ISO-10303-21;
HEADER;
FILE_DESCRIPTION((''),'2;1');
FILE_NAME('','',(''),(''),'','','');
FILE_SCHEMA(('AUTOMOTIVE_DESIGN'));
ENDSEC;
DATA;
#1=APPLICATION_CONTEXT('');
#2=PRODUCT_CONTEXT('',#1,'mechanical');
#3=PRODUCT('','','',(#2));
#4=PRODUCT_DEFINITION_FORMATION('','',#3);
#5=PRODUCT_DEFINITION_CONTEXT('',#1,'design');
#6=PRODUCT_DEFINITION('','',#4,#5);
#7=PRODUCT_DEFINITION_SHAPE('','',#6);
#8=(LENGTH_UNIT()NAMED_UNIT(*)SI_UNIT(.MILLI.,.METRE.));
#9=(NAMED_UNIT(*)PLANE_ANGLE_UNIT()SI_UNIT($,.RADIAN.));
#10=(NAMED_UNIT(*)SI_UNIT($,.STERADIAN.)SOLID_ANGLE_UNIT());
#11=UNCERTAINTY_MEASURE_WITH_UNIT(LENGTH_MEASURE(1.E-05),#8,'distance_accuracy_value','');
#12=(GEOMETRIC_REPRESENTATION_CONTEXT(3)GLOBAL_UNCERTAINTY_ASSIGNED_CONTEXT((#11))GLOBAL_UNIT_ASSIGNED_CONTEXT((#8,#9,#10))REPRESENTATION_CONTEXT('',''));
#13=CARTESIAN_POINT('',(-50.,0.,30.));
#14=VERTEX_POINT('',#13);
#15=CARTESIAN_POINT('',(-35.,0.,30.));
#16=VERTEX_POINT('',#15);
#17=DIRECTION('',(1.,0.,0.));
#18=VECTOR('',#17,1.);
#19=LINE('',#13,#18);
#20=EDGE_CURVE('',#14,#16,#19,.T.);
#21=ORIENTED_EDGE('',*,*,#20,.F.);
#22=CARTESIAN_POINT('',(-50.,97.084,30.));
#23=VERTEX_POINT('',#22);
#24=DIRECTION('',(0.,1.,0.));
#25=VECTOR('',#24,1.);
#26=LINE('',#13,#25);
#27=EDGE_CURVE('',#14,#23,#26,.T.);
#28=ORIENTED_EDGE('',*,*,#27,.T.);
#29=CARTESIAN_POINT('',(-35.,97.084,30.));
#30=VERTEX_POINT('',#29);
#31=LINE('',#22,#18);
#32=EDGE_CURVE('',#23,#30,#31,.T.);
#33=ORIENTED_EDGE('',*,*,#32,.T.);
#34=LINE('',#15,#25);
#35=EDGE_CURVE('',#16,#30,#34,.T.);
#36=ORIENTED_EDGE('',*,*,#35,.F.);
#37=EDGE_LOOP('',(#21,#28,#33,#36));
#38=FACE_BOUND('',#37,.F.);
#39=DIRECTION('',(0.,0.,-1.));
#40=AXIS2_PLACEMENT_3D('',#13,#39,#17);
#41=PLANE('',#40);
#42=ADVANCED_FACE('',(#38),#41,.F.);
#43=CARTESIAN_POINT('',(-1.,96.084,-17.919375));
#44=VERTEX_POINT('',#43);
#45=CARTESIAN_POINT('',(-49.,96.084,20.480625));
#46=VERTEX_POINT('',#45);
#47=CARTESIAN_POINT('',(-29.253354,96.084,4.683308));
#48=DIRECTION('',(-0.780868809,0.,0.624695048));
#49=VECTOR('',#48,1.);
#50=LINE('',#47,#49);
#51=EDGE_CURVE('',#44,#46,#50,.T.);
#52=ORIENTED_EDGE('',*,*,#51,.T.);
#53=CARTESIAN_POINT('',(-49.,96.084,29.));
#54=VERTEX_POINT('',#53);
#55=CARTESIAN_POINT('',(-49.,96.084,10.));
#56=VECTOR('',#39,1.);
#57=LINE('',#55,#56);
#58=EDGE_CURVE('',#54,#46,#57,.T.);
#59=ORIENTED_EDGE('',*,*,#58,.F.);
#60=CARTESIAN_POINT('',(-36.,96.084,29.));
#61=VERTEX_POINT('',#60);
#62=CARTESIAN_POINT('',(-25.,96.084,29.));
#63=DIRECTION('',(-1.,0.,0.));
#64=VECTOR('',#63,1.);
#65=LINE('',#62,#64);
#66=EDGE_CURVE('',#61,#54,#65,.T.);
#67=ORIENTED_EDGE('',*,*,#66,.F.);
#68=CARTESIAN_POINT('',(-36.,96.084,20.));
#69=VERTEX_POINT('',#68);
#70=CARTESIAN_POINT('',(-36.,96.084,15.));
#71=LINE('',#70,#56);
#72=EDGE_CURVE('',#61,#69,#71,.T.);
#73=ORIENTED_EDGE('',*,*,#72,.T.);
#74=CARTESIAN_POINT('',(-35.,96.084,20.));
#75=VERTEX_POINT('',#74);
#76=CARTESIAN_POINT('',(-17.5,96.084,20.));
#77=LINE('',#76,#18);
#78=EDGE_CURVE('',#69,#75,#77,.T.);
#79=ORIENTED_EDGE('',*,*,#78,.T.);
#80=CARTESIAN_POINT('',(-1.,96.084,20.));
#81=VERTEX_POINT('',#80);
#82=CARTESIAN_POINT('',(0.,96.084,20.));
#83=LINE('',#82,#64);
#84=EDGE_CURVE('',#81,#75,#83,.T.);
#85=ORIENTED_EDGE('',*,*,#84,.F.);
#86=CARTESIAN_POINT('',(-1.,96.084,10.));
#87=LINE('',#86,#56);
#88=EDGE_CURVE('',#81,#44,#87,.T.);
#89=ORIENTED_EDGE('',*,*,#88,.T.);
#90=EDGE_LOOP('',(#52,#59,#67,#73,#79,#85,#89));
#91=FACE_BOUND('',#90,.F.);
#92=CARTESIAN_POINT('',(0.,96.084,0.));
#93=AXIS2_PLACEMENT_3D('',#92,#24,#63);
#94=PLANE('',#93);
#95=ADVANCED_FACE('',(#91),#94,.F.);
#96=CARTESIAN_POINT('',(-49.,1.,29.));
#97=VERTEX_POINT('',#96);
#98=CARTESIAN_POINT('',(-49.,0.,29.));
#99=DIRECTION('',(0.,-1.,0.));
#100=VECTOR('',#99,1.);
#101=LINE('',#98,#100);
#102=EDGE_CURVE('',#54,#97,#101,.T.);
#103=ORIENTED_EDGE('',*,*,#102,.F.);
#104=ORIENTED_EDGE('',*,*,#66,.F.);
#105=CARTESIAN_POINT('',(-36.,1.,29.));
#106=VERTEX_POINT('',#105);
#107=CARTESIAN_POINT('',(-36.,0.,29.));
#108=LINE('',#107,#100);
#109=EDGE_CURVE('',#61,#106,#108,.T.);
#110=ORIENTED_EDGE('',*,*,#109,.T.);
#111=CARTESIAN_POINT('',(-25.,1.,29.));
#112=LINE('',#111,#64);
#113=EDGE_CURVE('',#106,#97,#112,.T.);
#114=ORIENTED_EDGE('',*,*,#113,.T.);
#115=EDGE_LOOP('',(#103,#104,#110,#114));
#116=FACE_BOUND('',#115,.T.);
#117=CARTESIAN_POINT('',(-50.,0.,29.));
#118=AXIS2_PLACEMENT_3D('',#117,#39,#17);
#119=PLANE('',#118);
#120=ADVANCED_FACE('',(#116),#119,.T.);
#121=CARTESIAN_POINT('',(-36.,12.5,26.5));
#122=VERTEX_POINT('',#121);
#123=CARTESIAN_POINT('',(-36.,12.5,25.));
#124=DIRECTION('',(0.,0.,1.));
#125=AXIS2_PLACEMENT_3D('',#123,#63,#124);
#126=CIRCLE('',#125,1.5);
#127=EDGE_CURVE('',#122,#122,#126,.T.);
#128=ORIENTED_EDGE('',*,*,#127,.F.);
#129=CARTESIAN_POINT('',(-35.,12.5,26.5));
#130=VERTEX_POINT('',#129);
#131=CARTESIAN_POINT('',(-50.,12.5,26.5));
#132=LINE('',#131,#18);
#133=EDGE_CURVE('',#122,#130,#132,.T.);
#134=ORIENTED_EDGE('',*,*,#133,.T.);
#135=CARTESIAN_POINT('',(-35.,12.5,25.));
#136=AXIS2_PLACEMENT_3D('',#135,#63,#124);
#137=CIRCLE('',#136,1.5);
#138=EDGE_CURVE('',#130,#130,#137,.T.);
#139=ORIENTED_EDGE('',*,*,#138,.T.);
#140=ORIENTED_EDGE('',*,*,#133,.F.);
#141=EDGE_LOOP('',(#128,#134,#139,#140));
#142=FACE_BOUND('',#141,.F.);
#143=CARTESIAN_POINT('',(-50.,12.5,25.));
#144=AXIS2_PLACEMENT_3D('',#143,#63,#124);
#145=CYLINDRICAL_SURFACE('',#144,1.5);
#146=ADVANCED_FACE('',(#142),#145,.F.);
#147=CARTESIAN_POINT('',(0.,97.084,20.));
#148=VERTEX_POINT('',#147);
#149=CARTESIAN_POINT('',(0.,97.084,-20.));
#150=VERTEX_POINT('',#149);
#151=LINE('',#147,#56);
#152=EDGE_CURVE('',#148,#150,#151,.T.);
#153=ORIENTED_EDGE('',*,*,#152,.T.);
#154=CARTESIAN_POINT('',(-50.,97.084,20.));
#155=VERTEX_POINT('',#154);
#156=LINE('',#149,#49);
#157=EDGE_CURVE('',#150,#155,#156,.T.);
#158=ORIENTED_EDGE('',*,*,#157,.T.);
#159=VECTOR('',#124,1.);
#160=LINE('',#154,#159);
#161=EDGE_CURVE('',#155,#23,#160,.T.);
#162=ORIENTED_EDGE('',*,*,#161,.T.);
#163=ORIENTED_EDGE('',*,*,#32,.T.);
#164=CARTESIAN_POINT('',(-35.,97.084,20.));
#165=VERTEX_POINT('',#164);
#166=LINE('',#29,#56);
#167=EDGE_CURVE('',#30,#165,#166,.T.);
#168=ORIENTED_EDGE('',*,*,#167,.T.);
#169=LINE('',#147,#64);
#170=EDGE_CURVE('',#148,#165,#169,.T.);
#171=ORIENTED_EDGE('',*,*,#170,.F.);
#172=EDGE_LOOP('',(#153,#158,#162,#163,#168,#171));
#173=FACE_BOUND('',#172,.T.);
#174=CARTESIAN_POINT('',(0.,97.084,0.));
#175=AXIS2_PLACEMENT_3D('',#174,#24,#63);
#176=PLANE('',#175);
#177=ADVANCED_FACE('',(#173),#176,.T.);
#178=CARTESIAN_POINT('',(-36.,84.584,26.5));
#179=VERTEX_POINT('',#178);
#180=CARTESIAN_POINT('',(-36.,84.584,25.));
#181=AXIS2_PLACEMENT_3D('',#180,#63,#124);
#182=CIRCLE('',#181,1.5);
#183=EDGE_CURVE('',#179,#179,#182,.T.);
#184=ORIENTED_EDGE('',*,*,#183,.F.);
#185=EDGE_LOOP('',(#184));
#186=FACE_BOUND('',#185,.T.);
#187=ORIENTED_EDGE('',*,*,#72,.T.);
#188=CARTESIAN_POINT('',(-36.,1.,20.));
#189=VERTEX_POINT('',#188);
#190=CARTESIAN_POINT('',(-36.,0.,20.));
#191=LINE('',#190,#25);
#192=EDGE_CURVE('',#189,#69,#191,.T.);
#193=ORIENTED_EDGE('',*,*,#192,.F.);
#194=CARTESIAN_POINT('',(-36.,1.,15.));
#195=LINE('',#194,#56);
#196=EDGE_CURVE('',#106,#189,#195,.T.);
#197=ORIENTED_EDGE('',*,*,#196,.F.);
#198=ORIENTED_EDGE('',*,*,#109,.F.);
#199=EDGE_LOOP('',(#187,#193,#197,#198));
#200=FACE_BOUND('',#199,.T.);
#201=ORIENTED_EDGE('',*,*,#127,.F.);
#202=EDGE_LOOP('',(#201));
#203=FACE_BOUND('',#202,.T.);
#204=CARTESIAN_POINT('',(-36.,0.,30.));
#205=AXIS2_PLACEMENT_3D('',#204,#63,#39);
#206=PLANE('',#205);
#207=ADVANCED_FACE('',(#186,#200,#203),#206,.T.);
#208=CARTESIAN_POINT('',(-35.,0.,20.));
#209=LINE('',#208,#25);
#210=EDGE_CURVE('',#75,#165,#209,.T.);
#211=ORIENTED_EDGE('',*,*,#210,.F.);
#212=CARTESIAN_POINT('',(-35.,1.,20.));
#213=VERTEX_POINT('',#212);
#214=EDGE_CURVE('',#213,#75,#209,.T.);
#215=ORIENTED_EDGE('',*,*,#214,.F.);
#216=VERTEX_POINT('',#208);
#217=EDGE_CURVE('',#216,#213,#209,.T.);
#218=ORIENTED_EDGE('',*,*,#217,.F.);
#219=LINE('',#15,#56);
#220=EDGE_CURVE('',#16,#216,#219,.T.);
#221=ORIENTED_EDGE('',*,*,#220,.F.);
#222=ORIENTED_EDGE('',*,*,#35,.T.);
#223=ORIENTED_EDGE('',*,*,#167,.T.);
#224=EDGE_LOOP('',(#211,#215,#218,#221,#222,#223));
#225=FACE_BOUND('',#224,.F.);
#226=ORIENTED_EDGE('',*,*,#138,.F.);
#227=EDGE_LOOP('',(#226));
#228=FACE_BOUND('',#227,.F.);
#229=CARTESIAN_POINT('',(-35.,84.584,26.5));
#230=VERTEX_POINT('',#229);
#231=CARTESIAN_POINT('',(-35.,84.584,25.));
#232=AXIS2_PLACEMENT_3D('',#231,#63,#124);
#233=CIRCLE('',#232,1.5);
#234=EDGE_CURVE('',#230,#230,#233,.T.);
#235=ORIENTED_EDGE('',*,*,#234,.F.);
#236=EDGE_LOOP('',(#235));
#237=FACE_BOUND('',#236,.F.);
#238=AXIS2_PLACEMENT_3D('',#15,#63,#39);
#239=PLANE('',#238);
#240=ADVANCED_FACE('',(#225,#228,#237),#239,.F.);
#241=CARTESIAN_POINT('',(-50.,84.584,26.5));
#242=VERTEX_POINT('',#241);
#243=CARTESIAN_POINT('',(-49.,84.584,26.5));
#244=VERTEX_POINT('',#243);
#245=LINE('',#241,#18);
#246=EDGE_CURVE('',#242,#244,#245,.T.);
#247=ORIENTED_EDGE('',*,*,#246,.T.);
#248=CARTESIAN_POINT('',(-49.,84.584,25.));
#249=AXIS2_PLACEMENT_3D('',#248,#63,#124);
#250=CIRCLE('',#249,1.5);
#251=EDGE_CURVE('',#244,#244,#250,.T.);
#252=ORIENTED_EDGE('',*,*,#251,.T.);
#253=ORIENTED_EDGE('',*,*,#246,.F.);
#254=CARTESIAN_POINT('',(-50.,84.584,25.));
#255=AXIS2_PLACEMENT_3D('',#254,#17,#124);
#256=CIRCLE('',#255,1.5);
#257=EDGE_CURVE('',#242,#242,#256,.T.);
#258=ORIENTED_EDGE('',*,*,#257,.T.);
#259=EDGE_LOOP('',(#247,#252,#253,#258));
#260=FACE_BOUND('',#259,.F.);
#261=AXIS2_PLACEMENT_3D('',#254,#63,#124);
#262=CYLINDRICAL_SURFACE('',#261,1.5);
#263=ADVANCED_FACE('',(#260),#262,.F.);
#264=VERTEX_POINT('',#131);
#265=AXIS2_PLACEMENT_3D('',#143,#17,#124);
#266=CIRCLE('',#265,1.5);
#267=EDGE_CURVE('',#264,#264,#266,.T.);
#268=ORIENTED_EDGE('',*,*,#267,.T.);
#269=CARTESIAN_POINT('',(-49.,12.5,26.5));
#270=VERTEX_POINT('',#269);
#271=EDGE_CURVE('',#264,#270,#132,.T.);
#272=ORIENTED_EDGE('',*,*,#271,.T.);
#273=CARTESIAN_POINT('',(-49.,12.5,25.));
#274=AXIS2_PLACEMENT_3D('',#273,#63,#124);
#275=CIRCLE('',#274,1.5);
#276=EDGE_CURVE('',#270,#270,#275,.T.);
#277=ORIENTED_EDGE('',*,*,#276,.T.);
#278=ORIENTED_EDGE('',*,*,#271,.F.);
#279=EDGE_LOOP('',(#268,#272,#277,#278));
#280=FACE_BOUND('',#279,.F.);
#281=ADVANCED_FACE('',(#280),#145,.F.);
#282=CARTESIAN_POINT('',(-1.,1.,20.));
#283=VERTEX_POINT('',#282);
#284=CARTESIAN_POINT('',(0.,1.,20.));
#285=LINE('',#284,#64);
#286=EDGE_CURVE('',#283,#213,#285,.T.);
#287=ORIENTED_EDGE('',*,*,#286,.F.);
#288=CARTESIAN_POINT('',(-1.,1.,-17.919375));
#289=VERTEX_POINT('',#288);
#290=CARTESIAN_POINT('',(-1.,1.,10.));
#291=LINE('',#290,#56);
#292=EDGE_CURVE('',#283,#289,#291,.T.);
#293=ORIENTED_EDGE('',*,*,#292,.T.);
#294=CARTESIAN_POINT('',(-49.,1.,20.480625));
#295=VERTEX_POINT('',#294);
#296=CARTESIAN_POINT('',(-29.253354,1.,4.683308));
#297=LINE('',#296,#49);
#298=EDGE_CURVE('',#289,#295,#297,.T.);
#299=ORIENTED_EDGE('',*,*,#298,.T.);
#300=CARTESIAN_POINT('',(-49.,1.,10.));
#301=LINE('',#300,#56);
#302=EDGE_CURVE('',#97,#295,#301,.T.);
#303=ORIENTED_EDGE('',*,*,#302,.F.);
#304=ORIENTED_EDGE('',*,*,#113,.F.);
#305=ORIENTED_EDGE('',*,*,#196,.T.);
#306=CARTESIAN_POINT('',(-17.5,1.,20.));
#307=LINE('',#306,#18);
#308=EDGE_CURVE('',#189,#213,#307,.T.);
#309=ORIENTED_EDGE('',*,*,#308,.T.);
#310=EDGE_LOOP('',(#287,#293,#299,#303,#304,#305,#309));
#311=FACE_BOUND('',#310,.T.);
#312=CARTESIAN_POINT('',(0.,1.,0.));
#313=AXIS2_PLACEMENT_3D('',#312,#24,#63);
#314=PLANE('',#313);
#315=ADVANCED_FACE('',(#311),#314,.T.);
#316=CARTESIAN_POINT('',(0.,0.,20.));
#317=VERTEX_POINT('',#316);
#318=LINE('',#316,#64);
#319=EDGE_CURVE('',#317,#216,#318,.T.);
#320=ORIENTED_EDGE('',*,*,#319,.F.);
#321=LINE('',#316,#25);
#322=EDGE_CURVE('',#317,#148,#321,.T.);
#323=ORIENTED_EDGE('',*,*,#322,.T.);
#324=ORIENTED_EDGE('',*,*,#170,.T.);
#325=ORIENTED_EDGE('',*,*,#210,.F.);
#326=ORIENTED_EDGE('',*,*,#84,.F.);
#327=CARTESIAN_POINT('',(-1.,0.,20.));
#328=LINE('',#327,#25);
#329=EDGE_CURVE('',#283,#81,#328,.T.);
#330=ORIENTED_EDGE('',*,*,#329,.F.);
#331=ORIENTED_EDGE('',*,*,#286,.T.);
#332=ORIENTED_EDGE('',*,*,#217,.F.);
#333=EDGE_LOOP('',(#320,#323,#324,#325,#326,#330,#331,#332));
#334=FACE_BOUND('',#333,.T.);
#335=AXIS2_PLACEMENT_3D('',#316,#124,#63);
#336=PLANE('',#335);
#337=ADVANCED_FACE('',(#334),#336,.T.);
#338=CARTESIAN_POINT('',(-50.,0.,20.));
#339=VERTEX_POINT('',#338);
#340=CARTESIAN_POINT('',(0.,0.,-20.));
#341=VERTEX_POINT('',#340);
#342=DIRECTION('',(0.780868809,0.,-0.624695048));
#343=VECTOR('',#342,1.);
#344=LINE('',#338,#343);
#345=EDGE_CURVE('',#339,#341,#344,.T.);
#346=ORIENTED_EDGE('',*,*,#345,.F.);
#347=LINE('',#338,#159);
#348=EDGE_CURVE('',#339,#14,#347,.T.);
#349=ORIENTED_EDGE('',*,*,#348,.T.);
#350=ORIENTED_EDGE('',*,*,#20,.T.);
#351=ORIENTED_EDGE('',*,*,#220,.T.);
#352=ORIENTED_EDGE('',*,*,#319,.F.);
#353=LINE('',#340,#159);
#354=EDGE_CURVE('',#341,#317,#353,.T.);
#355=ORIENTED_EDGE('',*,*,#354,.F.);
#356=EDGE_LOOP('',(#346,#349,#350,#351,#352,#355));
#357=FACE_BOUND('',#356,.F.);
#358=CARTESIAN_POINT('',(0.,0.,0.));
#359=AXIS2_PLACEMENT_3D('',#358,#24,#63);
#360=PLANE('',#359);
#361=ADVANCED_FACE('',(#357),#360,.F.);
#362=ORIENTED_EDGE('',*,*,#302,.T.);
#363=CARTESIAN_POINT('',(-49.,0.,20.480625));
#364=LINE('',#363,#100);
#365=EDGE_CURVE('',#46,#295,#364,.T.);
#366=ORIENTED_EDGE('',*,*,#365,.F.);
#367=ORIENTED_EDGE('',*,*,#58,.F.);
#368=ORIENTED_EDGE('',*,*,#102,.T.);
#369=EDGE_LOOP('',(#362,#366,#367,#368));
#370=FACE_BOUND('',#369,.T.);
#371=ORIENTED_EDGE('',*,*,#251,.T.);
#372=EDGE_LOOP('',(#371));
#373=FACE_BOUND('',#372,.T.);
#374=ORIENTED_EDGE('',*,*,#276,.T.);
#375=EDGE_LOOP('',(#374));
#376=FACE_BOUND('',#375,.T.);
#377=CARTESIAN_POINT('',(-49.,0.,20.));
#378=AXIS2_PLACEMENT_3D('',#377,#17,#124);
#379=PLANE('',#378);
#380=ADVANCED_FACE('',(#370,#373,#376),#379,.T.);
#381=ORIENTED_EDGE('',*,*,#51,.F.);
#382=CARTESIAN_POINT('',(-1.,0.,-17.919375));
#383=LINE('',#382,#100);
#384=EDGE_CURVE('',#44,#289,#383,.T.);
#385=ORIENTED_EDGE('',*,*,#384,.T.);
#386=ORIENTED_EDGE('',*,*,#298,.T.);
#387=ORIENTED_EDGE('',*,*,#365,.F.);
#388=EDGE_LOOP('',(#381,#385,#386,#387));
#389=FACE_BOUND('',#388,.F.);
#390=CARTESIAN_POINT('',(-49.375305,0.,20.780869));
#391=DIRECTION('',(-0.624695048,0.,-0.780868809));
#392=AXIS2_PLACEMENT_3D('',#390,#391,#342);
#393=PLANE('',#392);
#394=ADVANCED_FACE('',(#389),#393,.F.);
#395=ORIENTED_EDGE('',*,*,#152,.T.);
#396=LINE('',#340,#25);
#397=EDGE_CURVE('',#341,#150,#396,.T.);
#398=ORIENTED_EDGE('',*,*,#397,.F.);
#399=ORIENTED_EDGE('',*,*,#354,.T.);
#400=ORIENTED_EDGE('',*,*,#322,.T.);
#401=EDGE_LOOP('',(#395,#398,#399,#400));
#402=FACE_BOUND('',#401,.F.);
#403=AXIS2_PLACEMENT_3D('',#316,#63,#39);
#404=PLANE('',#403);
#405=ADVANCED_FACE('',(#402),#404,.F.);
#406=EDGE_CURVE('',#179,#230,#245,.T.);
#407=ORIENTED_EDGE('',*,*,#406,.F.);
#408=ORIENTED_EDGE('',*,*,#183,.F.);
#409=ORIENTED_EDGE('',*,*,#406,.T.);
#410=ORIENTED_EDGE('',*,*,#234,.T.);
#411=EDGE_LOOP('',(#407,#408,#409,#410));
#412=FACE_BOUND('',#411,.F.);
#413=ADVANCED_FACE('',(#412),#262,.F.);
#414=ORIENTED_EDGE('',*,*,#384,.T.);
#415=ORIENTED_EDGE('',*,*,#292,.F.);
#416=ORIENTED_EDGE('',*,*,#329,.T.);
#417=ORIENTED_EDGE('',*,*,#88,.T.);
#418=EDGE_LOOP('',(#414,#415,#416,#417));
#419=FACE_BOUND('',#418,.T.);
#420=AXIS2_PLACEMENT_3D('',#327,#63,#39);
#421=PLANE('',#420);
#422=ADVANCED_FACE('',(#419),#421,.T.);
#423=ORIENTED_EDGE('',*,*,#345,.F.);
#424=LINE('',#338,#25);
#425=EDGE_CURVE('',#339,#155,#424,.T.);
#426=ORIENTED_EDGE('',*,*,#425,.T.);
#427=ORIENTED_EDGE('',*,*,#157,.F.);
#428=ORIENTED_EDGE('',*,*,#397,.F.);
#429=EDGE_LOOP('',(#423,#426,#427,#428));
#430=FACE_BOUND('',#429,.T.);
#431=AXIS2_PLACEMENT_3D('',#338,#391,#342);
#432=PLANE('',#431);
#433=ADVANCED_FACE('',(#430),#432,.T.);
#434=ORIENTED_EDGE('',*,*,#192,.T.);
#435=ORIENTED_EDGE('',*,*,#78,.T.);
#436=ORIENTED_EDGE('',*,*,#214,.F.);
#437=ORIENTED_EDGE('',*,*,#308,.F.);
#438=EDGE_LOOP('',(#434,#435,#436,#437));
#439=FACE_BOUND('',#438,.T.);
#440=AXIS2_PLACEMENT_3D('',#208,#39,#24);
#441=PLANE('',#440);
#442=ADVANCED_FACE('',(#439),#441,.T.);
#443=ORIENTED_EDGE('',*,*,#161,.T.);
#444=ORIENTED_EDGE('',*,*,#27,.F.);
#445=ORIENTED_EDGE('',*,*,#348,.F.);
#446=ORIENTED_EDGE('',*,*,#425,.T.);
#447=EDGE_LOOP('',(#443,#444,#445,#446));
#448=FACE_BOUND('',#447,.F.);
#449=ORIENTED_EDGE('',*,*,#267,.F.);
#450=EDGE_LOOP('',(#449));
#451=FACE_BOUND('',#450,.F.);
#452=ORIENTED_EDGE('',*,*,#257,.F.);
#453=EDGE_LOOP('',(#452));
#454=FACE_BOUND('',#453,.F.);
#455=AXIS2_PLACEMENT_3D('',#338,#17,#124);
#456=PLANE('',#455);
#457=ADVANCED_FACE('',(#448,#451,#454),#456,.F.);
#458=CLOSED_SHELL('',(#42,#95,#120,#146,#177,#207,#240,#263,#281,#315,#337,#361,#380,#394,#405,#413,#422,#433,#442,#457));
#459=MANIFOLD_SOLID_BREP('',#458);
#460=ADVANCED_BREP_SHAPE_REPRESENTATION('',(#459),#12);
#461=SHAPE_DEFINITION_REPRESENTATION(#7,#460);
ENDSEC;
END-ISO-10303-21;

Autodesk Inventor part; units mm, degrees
ref_plane "YZ Plane" through (0, 0, 0) normal (1, 0, 0) x (0, 1, 0)
ref_plane "XZ Plane" through (0, 0, 0) normal (0, 1, 0) x (-1, 0, 0)
ref_plane "XY Plane" through (0, 0, 0) normal (0, 0, 1) x (1, 0, 0)
sketch "Esboço1" plane through (0, 0, 0) normal (0, 1, 0) x (-1, 0, 0)
  line L0 (0, 20) -> (0, -20)
  line L1 (0, 20) -> (50, 20)
  line L2 (50, 20) -> (0, -20)
  line L3 (50, 20) -> (50, 30)
  line L4 (50, 30) -> (35, 30)
  line L5 (35, 30) -> (35, 20)
  point P0 (0, 0)
  dimension "d0" = 40
  dimension "d1" = 50
  dimension "d2" = 10
  dimension "d3" = 15
extrude "Extrusão1" add sketch "Esboço1" along normal blind 97.084
shell "Casca1" thickness 1 removed faces 1 at (-23.3333, 32.3613, 20)
sketch "Esboço2" plane through (-50, 0, 20) normal (-1, 0, 0) x (0, 0, 1)
  line L0 (10, 97.084) -> (0, 97.084) projected
  line L1 (0, 97.084) -> (5, 97.084)
  line L2 (5, 97.084) -> (5, 84.584)
  circle A0 centre (5, 84.584) radius 1.5
  line L3 (10, 0) -> (0, 0) projected
  line L4 (0, 0) -> (5, 0)
  line L5 (5, 0) -> (5, 12.5)
  circle A1 centre (5, 12.5) radius 1.5
  point P0 (-20, 0)
  dimension "d7" = 5
  dimension "d8" = 12.5
  dimension "d9" = 3
  dimension "d10" = 5
  dimension "d11" = 12.5
  dimension "d12" = 3
extrude "Extrusão2" cut sketch "Esboço2" against normal blind 102.84
thread "Rosca1" size "M3x0.5" class "6H" standard "ANSI Metric M Profile" length 20
thread "Rosca2" size "M3x0.5" class "6H" standard "ANSI Metric M Profile" length 20
thread "Rosca3" size "M3x0.5" class "6H" standard "ANSI Metric M Profile" length 20
thread "Rosca4" size "M3x0.5" class "6H" standard "ANSI Metric M Profile" length 20
sketch "Esboço3" plane through (0, 97.084, 0) normal (0, 1, 0) x (1, 0, 0)
  line L0 (-50, -30) -> (-35, -30) projected
  point P0 (0, 0)
  point P1 (-35, -20)
  dimension "d23" = 10
sketch "Esboço4" plane through (-50, 0, 20) normal (-1, 0, 0) x (0, 0, 1)
  line L0 (0, 97.084) -> (10, 97.084) projected
  line L1 (0, 0) -> (10, 0) projected
  point P0 (-20, 0)
  dimension "d24" = 97.084
sketch "Esboço5" plane through (0, 97.084, 0) normal (0, 1, 0) x (1, 0, 0)
  point P0 (0, 0)
properties part number "Rampa 1"
